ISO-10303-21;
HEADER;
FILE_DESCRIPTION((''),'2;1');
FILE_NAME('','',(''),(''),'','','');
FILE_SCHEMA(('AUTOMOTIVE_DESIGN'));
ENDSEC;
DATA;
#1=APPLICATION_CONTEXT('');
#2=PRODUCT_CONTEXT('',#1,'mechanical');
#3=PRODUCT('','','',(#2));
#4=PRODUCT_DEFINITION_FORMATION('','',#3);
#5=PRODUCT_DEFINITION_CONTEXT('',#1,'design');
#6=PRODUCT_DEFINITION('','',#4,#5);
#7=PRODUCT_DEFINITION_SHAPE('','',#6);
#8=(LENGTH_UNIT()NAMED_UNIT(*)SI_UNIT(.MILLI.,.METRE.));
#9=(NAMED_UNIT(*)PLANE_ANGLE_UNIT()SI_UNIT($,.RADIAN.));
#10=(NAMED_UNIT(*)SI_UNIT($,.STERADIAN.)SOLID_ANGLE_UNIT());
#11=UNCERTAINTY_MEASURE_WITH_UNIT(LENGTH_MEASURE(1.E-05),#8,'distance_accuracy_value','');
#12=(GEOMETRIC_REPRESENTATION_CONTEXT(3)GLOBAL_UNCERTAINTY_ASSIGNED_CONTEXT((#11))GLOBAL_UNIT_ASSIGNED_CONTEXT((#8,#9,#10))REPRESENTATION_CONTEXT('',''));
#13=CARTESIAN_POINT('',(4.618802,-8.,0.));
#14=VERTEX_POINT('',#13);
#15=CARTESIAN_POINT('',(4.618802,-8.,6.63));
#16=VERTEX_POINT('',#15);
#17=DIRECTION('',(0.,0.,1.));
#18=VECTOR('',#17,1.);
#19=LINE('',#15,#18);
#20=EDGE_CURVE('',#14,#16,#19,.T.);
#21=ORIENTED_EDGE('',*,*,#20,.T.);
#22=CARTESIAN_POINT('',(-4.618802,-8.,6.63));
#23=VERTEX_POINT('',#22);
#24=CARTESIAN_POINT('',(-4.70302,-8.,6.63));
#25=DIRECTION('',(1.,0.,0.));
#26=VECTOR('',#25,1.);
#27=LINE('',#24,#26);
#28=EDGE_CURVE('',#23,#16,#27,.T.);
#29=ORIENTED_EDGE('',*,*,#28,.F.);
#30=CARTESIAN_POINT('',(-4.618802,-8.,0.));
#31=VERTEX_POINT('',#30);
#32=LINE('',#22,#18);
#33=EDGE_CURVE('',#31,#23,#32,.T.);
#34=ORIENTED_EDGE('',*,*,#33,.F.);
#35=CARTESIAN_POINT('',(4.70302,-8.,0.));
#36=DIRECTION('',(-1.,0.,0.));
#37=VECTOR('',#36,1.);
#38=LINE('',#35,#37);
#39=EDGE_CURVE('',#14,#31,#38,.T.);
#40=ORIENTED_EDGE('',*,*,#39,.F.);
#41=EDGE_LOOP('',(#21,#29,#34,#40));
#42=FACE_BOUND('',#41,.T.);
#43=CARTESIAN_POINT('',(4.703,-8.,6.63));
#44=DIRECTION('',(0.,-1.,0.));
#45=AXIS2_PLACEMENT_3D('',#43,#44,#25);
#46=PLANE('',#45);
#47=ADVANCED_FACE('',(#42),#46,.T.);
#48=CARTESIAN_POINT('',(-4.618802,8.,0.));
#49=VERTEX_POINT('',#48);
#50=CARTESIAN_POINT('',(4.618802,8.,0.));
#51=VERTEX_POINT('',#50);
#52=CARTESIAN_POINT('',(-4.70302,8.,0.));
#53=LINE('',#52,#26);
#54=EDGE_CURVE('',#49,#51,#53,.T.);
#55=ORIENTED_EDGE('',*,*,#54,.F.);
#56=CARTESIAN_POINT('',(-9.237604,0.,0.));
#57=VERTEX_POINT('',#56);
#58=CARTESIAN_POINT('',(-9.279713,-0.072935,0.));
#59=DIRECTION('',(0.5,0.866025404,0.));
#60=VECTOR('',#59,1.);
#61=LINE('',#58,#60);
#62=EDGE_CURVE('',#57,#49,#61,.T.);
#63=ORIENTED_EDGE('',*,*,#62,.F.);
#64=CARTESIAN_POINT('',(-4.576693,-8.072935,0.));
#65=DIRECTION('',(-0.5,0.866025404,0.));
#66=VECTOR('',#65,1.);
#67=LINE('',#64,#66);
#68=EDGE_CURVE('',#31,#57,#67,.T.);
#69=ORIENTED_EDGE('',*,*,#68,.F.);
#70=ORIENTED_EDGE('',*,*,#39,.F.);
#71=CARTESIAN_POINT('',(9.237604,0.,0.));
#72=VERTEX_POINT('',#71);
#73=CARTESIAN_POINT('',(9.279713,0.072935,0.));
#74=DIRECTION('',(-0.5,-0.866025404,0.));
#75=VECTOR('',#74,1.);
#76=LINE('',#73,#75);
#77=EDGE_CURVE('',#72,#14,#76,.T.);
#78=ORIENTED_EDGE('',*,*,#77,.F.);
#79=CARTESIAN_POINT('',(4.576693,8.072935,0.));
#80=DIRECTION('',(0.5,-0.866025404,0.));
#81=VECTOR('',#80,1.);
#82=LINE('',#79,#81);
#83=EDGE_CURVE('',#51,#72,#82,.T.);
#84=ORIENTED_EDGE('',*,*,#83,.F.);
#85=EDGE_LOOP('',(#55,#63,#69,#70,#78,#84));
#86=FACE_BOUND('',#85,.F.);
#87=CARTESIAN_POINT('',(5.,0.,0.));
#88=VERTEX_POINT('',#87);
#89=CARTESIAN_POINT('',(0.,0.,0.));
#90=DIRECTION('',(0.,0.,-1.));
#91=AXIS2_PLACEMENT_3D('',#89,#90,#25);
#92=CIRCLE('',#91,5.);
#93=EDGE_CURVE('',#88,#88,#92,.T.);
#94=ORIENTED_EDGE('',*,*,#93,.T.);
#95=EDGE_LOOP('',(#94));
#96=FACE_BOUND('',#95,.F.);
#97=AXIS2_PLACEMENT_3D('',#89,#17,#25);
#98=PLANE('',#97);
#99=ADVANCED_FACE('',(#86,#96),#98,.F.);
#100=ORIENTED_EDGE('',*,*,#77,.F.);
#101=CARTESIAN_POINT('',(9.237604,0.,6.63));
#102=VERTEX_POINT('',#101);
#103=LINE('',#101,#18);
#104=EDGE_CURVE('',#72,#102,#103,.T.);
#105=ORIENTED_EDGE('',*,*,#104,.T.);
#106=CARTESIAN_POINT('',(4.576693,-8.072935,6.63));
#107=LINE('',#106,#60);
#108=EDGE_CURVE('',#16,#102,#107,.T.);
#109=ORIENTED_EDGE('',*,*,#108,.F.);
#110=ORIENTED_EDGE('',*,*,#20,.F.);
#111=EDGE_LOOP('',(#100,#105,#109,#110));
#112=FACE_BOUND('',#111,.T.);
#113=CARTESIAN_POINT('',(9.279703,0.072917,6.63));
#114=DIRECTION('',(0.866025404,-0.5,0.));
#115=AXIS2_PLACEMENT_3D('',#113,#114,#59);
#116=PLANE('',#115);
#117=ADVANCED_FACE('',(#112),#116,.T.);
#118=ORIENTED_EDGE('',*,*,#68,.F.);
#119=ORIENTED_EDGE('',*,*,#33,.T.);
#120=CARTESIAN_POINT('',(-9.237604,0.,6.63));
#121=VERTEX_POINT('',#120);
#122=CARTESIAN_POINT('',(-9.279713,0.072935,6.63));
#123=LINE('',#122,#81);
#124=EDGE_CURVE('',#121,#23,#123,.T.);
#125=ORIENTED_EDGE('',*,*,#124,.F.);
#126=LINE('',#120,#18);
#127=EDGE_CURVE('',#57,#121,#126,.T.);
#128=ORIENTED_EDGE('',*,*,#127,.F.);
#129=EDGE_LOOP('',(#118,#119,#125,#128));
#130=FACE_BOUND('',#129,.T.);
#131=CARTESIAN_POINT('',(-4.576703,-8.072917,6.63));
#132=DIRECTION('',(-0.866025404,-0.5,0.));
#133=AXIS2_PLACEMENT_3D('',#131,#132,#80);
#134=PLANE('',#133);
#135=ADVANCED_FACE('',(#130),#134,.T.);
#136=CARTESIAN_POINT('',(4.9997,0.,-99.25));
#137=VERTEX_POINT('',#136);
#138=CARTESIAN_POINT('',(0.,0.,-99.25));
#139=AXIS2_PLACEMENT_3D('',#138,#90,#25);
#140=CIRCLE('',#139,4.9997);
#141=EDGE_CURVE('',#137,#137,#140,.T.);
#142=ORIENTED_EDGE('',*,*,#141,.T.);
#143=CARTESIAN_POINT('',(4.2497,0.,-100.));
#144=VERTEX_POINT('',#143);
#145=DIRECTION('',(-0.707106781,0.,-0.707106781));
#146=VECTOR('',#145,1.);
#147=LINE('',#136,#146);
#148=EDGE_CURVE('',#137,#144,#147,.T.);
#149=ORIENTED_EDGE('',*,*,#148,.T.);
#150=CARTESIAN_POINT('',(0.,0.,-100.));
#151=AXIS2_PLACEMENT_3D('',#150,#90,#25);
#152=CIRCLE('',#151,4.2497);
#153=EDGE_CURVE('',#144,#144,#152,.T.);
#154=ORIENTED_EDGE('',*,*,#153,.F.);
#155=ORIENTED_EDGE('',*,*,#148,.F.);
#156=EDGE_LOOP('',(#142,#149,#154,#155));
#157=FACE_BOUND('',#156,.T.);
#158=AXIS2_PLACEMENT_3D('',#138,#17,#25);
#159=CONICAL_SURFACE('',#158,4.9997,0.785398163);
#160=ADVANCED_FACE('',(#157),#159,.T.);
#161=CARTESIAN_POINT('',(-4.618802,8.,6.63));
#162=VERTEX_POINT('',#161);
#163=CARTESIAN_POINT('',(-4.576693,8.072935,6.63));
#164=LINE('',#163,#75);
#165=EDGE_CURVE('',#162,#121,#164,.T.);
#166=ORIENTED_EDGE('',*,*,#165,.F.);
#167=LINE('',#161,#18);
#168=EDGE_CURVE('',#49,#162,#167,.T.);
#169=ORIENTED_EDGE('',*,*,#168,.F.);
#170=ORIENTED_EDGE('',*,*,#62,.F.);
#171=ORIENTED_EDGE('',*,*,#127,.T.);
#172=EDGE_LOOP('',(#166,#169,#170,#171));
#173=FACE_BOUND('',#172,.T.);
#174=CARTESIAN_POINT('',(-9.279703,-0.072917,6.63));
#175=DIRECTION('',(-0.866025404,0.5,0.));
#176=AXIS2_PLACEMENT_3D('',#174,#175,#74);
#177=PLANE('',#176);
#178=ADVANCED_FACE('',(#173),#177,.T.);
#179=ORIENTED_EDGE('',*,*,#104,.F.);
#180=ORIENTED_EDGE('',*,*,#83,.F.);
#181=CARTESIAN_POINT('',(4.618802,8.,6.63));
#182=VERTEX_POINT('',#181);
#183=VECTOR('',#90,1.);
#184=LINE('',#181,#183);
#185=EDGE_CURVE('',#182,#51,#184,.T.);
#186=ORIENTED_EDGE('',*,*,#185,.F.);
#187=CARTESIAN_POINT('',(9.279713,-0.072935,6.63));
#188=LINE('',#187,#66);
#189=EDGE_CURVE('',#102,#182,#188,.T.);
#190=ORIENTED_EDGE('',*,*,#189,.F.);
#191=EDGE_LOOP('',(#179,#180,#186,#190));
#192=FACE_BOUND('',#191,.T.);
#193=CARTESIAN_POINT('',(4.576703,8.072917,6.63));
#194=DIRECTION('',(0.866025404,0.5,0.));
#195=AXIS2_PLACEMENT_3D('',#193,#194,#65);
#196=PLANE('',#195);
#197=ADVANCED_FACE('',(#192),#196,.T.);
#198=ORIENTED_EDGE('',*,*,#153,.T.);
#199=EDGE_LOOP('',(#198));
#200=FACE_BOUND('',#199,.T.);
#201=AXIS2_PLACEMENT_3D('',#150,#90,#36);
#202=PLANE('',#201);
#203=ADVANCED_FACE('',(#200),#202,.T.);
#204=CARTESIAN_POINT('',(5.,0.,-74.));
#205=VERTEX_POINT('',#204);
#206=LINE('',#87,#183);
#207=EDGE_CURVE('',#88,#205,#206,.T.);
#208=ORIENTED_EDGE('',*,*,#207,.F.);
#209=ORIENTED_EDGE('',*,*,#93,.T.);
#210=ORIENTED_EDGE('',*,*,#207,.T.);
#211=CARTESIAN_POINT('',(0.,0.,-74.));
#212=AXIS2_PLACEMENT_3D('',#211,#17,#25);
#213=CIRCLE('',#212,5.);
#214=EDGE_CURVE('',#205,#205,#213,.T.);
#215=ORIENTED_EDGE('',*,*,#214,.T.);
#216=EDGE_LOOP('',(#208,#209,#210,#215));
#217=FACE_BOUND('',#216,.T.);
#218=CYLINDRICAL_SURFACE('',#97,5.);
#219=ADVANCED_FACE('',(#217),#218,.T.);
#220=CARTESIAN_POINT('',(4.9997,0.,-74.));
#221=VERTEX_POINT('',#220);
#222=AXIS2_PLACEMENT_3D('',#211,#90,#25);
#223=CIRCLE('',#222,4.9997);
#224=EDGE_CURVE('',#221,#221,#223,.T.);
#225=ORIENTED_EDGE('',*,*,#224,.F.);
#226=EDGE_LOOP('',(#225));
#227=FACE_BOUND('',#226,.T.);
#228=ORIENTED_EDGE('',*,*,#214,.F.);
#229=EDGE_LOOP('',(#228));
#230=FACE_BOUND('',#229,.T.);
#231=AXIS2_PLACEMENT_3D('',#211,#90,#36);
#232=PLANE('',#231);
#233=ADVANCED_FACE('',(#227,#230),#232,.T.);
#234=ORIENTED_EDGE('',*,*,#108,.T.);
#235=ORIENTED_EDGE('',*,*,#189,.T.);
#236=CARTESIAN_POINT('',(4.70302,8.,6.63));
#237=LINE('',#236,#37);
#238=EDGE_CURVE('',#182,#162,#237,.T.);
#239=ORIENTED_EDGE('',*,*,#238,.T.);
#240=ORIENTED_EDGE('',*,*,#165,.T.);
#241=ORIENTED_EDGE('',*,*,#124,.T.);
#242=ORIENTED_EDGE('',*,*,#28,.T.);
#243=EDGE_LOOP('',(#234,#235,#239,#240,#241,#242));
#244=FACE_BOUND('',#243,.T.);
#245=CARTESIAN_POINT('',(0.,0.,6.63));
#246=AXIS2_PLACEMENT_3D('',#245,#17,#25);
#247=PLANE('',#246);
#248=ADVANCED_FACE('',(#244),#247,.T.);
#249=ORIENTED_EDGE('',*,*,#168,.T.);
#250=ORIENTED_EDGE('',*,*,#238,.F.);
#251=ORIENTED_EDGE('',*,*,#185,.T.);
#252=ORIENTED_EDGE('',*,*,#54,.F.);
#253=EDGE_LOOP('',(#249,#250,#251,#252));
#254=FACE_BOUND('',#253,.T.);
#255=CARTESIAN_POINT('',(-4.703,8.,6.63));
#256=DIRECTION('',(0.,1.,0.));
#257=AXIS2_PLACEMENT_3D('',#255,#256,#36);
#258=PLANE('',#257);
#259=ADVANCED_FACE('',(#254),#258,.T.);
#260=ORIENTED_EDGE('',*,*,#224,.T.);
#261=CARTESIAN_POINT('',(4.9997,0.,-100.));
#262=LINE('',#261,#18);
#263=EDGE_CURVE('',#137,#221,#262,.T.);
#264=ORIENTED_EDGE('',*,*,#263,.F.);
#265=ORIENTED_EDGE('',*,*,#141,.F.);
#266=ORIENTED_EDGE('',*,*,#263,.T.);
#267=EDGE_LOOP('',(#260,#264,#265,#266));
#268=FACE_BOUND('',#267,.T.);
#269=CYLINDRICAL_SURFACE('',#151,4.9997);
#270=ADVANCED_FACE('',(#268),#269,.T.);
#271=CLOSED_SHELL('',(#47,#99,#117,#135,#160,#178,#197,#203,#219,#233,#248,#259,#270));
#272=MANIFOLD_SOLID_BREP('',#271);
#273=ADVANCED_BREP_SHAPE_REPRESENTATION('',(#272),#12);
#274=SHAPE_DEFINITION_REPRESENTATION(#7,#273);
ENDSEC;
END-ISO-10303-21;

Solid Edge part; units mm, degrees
sketch "Sketch1" plane through (0, 0, 0) normal (0, 0, 1) x (1, 0, 0)
  circle A0 centre (0, 0) radius 9.28
  dimension "D1" = 18.56
extrude "Protrusion1" add sketch "Sketch1" along normal blind 6.63
sketch "Sketch2" plane through (0, 0, 0) normal (0, 0, -1) x (1, 0, 0)
  circle A0 centre (0, 0) radius 5
extrude "Protrusion2" add sketch "Sketch2" along normal blind 100
sketch "Sketch3" plane through (0, 0, -100) normal (0, 0, -1) x (1, 0, 0)
  circle A0 centre (0, 0) radius 4.9997
extrude "Cutout1" cut sketch "Sketch3" against normal blind 26 flip side to cut
chamfer "Chamfer_1" distance 0.75 angle 45 1 edges at (-4.9997, 0, -100)
sketch "Sketch4" plane through (0, 0, 6.63) normal (0, 0, 1) x (1, 0, 0)
  line L0 (-4.703, 8) -> (4.703, 8)
  dimension "D1" = 16
extrude "Cutout2" cut sketch "Sketch4" against normal up to next material side at (0, 8.05, 6.63)
pattern_circular "Pattern1" count 6 over 360 about axis through (0, 0, 6.63) along (0, 0, 1) of "Cutout2"
properties part number "24104503"
